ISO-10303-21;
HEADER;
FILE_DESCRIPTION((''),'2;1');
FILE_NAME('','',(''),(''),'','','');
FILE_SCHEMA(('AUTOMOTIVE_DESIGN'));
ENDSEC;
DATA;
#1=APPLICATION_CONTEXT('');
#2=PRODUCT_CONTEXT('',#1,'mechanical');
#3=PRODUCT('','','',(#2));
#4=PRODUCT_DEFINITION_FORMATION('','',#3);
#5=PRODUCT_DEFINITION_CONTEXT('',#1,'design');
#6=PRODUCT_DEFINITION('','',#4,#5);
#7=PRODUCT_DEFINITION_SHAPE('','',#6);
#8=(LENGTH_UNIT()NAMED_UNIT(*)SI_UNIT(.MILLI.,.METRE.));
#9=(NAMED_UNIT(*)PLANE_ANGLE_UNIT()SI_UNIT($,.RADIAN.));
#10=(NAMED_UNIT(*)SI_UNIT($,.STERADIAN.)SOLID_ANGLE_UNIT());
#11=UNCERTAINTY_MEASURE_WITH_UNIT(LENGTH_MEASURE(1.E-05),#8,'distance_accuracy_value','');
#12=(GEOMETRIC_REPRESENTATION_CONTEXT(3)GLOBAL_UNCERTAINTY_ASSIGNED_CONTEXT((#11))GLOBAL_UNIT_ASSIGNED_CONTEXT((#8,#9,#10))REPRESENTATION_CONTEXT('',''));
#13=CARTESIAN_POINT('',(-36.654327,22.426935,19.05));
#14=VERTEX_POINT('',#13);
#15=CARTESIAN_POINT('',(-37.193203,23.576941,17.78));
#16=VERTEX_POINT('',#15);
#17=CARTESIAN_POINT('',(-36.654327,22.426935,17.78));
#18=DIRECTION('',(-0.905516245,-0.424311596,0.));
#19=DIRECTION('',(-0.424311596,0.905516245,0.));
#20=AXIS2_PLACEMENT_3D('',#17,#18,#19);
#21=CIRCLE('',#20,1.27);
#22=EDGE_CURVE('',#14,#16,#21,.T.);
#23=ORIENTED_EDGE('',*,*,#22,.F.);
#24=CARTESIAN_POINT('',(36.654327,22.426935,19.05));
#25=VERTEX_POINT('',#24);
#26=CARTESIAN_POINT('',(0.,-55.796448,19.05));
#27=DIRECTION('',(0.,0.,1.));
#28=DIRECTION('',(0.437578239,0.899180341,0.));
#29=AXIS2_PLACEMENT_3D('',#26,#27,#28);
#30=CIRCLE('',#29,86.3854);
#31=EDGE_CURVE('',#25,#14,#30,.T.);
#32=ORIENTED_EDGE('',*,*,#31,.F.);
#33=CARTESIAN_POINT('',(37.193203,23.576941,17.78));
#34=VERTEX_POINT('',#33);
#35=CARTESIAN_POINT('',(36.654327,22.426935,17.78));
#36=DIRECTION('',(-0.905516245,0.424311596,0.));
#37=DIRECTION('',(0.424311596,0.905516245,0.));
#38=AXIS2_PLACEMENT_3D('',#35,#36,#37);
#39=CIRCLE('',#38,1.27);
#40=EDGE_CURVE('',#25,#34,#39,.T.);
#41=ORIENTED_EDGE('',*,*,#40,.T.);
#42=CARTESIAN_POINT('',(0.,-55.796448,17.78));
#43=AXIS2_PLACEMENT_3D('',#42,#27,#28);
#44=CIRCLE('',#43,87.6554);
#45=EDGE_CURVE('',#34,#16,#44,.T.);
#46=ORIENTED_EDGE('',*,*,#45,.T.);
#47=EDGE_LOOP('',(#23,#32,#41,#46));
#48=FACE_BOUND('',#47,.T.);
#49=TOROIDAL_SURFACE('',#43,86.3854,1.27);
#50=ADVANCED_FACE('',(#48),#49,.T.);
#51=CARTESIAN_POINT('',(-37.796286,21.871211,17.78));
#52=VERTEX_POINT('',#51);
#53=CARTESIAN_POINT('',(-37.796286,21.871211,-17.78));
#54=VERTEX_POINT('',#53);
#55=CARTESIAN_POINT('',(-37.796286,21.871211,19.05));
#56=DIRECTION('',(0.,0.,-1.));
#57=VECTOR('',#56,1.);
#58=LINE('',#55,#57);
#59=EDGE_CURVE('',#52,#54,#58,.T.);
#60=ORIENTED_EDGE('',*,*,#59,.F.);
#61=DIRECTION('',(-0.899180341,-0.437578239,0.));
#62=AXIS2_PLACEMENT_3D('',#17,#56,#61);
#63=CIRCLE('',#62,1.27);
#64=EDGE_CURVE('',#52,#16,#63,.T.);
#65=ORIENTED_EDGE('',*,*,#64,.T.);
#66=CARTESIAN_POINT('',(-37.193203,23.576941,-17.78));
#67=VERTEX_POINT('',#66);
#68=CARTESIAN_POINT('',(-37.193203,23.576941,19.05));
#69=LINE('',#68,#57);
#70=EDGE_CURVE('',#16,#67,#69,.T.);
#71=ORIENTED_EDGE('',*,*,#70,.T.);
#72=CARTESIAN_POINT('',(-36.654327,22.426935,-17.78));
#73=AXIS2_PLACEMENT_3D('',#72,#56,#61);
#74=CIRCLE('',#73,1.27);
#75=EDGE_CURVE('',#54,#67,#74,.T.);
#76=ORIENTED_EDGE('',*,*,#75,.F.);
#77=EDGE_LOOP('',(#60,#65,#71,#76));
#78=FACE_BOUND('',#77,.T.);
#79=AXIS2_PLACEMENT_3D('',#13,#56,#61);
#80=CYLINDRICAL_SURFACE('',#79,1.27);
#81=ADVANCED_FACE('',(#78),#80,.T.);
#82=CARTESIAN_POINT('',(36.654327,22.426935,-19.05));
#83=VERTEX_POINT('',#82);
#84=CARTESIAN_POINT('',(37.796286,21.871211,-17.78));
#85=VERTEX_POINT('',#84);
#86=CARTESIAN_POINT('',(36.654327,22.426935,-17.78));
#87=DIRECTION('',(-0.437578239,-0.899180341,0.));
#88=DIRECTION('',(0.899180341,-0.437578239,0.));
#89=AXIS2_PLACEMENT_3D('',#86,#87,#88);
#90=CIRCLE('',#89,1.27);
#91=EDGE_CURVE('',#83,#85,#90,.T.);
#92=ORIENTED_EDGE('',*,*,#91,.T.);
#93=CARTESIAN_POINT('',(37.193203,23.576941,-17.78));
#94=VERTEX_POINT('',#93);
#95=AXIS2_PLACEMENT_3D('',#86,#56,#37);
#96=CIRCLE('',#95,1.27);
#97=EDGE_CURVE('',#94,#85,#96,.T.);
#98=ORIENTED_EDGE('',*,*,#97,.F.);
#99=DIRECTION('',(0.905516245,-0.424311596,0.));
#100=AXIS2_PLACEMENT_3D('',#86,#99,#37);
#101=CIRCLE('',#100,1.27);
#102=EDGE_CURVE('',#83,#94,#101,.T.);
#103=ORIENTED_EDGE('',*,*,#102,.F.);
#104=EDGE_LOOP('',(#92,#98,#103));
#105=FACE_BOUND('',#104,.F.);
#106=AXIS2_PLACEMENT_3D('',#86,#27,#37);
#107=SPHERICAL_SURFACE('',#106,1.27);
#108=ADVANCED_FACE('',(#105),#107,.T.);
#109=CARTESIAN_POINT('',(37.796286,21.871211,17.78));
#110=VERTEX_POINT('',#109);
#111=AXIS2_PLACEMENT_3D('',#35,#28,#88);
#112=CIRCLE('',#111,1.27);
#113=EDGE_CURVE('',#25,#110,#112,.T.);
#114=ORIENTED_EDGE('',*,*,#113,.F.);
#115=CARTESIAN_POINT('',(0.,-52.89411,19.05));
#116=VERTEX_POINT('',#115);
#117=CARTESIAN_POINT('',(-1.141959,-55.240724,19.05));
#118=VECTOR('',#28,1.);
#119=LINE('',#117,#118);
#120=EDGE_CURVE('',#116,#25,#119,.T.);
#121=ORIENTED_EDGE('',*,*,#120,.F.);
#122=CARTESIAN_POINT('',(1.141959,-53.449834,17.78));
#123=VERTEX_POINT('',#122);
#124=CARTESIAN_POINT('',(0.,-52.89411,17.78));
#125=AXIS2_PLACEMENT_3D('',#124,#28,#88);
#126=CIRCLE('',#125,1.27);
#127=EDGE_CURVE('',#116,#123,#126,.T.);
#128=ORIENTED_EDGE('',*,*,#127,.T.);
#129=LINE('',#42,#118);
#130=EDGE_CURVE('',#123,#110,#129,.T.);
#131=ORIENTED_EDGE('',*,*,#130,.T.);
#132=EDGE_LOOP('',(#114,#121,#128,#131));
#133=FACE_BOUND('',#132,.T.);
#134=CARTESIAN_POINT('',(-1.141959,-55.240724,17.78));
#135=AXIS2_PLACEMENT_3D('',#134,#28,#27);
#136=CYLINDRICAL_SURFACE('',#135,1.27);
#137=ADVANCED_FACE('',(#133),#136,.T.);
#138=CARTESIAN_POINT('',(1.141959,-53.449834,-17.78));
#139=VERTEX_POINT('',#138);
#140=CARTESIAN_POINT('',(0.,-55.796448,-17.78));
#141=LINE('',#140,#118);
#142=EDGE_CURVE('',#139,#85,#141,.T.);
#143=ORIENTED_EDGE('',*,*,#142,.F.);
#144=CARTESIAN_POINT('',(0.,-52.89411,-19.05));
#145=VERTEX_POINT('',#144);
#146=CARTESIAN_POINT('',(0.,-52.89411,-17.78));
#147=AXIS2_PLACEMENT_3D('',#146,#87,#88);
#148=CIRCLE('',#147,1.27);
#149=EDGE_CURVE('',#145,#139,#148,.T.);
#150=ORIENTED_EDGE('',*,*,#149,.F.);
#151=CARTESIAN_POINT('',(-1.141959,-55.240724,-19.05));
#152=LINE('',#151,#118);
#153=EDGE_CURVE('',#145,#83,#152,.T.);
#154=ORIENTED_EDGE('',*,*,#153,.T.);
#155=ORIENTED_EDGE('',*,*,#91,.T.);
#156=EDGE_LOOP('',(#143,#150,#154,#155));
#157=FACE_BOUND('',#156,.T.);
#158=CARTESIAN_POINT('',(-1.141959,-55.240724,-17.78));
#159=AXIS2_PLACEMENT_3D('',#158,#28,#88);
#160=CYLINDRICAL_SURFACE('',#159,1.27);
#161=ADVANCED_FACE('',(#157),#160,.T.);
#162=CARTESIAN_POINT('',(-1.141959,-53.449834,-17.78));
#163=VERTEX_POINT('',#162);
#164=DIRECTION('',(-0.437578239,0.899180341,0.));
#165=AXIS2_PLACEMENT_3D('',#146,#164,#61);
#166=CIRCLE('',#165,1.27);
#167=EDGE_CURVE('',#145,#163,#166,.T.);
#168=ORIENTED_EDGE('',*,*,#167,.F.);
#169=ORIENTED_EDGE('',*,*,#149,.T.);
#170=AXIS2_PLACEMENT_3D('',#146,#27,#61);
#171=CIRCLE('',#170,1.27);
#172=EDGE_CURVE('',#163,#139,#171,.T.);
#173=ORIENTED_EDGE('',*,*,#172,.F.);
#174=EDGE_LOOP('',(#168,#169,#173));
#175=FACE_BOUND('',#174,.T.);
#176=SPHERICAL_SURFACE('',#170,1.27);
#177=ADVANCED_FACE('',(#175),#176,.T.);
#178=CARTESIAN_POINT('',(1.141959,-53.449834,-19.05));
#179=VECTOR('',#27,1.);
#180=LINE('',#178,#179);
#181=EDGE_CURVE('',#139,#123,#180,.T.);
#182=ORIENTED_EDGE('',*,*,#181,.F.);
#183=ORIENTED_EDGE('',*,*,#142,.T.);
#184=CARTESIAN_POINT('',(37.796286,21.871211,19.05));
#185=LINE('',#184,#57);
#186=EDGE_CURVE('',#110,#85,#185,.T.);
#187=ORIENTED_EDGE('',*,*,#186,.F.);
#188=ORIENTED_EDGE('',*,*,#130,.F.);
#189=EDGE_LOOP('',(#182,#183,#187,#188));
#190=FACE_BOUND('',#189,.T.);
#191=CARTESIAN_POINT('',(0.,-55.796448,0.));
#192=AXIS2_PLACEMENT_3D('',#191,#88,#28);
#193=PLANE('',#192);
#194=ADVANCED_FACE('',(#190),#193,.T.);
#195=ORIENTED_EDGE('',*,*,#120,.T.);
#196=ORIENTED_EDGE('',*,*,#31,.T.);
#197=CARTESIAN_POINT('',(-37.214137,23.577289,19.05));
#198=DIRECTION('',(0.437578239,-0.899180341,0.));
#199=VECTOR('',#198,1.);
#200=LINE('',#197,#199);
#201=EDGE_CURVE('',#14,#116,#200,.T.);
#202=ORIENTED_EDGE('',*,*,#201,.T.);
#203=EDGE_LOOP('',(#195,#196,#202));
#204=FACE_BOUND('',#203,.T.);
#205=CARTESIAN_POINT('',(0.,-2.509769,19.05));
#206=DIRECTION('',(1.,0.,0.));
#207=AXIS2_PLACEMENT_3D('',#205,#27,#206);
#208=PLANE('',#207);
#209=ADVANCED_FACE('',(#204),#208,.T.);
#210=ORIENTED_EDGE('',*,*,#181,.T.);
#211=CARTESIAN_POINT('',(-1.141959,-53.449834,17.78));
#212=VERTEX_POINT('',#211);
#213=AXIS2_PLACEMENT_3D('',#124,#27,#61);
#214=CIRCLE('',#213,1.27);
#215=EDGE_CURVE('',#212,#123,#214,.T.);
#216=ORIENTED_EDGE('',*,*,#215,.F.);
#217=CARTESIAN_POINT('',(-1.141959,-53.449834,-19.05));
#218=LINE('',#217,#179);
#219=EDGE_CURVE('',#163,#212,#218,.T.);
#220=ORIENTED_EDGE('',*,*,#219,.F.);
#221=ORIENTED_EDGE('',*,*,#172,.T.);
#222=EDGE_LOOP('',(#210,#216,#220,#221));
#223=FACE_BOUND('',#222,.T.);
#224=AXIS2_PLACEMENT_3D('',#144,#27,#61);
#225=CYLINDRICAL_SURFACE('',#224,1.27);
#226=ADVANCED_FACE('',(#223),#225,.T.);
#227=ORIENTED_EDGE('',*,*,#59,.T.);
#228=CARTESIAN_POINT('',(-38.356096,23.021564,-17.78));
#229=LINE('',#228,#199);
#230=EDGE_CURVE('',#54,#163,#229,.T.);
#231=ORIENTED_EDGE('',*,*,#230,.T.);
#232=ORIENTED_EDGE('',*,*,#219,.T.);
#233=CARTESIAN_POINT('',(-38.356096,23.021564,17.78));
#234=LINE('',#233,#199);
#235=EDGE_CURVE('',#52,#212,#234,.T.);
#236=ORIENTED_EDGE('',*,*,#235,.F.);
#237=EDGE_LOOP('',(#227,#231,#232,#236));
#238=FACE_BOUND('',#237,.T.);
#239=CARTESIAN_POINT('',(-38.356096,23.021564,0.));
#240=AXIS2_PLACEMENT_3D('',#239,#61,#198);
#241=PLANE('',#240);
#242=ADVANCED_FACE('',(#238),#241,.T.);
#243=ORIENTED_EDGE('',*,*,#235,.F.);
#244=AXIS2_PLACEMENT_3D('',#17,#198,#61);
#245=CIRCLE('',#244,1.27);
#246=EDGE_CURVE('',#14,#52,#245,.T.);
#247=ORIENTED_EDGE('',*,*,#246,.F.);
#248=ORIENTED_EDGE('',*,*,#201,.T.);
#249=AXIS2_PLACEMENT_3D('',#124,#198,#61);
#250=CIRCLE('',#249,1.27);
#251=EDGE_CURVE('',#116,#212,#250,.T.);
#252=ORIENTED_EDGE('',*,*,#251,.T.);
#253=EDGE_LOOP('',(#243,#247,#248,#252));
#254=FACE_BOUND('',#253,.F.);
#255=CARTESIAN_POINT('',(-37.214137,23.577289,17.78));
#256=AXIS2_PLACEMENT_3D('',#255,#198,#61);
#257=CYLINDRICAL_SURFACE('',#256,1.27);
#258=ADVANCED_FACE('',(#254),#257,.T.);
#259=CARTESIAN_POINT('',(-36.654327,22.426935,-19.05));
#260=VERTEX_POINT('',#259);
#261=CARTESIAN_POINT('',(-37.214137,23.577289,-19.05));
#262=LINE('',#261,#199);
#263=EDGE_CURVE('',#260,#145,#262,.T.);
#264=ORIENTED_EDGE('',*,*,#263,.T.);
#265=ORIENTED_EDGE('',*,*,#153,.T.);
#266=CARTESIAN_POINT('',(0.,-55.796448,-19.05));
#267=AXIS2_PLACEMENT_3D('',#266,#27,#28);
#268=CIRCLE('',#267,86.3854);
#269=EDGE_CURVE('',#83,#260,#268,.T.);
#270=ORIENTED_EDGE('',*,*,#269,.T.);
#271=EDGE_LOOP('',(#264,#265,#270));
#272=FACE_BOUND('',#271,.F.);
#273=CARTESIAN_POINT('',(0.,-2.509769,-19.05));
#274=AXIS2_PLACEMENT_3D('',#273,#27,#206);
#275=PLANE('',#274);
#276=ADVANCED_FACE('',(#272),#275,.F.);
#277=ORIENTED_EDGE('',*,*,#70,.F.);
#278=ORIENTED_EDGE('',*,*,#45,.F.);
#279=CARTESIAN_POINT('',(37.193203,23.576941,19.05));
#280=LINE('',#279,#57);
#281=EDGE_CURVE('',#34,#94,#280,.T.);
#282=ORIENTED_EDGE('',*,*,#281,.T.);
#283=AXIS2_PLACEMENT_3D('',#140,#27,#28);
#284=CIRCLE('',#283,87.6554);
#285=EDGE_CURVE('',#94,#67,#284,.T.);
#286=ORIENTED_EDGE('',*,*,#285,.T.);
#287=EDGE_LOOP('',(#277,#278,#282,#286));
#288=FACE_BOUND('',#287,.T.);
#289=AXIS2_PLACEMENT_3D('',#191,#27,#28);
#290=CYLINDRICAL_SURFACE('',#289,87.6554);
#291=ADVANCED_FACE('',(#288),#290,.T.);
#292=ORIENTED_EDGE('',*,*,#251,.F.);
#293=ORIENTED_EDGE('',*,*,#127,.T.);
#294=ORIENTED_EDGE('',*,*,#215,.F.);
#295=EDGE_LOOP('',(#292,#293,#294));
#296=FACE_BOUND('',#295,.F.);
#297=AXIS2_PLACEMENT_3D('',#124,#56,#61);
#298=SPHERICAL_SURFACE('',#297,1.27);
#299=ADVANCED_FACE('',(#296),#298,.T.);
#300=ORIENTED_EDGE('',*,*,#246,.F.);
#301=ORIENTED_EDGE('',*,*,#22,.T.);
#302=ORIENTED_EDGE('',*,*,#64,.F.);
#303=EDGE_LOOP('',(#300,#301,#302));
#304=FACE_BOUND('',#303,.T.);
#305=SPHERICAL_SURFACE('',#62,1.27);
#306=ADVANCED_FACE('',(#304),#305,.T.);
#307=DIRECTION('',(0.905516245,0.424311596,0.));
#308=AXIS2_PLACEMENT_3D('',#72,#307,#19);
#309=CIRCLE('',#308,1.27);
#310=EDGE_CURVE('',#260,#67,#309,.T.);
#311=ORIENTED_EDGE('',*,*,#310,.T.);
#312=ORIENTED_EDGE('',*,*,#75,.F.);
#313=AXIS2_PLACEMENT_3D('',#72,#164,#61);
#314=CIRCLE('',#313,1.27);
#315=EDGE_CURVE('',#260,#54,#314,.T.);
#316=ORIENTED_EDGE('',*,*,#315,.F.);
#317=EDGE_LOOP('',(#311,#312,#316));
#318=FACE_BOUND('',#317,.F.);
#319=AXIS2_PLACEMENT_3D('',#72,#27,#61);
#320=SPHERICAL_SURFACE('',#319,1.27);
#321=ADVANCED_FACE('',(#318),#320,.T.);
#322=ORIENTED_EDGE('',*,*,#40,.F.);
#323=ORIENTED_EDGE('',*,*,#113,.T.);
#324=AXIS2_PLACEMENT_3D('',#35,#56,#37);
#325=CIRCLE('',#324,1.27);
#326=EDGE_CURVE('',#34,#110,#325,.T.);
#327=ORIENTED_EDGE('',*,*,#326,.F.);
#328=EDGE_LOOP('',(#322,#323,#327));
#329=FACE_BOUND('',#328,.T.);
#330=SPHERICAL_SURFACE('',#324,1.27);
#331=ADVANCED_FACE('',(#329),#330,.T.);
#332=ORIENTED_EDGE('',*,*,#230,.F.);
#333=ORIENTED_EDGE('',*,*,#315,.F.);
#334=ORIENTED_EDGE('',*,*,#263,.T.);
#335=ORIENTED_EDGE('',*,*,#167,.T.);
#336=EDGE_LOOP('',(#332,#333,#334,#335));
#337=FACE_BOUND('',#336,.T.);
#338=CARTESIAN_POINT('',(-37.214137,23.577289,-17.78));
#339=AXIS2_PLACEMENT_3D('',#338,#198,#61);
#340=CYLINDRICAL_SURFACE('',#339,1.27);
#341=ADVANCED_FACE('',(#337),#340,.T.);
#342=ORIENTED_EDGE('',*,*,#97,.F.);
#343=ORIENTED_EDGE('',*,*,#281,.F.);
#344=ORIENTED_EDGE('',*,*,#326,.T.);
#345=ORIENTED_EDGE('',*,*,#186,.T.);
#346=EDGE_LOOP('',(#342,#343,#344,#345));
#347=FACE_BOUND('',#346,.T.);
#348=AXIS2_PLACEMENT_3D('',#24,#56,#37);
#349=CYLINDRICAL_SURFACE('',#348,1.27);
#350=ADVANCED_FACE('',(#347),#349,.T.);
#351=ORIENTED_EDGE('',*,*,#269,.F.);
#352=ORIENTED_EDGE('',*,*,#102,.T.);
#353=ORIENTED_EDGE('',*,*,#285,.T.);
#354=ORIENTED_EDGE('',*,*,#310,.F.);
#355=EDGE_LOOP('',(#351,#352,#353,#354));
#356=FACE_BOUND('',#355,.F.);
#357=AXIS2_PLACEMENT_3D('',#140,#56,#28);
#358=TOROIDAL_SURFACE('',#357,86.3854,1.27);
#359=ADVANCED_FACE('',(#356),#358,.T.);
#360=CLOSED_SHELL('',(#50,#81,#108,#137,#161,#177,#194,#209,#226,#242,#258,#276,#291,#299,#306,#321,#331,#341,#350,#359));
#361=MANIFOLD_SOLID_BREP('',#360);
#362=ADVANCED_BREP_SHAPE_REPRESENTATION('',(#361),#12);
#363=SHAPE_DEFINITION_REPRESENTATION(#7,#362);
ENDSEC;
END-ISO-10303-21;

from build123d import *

# Parameters (mm, degrees)
F1_DEPTH = 19.05
F3_R     = 1.27


# Not quite as in the source:
# - a feature of the source that left no trace in its solid (it failed there, or was rolled back) is left out


with BuildPart() as f1:
    # F0 (on Top) → F1 (new body, symmetric)
    with BuildSketch(Plane.XY):
        with BuildLine():
            Line((-38.3560955603, 23.021564283), (0, -55.7964481413))
            Line((0, -55.7964481413), (38.3560955603, 23.021564283))
            ThreePointArc((38.3560955603, 23.021564283), (0, 31.8589518587), (-38.3560955603, 23.021564283))
        make_face()
    extrude(amount=F1_DEPTH, both=True)

    # F3
    f3_edges = [f1.edges().sort_by_distance(p)[0] for p in [
        (0, -55.796448, 0),
        (38.356096, 23.021564, 0),
        (-38.356096, 23.021564, 0),
        (-19.178048, -16.387442, -19.05),
        (-19.178048, -16.387442, 19.05),
        (0, 31.858952, -19.05),
        (0, 31.858952, 19.05),
        (19.178048, -16.387442, 19.05),
        (19.178048, -16.387442, -19.05),
    ]]
    fillet(f3_edges, radius=F3_R)


solid = f1.part
